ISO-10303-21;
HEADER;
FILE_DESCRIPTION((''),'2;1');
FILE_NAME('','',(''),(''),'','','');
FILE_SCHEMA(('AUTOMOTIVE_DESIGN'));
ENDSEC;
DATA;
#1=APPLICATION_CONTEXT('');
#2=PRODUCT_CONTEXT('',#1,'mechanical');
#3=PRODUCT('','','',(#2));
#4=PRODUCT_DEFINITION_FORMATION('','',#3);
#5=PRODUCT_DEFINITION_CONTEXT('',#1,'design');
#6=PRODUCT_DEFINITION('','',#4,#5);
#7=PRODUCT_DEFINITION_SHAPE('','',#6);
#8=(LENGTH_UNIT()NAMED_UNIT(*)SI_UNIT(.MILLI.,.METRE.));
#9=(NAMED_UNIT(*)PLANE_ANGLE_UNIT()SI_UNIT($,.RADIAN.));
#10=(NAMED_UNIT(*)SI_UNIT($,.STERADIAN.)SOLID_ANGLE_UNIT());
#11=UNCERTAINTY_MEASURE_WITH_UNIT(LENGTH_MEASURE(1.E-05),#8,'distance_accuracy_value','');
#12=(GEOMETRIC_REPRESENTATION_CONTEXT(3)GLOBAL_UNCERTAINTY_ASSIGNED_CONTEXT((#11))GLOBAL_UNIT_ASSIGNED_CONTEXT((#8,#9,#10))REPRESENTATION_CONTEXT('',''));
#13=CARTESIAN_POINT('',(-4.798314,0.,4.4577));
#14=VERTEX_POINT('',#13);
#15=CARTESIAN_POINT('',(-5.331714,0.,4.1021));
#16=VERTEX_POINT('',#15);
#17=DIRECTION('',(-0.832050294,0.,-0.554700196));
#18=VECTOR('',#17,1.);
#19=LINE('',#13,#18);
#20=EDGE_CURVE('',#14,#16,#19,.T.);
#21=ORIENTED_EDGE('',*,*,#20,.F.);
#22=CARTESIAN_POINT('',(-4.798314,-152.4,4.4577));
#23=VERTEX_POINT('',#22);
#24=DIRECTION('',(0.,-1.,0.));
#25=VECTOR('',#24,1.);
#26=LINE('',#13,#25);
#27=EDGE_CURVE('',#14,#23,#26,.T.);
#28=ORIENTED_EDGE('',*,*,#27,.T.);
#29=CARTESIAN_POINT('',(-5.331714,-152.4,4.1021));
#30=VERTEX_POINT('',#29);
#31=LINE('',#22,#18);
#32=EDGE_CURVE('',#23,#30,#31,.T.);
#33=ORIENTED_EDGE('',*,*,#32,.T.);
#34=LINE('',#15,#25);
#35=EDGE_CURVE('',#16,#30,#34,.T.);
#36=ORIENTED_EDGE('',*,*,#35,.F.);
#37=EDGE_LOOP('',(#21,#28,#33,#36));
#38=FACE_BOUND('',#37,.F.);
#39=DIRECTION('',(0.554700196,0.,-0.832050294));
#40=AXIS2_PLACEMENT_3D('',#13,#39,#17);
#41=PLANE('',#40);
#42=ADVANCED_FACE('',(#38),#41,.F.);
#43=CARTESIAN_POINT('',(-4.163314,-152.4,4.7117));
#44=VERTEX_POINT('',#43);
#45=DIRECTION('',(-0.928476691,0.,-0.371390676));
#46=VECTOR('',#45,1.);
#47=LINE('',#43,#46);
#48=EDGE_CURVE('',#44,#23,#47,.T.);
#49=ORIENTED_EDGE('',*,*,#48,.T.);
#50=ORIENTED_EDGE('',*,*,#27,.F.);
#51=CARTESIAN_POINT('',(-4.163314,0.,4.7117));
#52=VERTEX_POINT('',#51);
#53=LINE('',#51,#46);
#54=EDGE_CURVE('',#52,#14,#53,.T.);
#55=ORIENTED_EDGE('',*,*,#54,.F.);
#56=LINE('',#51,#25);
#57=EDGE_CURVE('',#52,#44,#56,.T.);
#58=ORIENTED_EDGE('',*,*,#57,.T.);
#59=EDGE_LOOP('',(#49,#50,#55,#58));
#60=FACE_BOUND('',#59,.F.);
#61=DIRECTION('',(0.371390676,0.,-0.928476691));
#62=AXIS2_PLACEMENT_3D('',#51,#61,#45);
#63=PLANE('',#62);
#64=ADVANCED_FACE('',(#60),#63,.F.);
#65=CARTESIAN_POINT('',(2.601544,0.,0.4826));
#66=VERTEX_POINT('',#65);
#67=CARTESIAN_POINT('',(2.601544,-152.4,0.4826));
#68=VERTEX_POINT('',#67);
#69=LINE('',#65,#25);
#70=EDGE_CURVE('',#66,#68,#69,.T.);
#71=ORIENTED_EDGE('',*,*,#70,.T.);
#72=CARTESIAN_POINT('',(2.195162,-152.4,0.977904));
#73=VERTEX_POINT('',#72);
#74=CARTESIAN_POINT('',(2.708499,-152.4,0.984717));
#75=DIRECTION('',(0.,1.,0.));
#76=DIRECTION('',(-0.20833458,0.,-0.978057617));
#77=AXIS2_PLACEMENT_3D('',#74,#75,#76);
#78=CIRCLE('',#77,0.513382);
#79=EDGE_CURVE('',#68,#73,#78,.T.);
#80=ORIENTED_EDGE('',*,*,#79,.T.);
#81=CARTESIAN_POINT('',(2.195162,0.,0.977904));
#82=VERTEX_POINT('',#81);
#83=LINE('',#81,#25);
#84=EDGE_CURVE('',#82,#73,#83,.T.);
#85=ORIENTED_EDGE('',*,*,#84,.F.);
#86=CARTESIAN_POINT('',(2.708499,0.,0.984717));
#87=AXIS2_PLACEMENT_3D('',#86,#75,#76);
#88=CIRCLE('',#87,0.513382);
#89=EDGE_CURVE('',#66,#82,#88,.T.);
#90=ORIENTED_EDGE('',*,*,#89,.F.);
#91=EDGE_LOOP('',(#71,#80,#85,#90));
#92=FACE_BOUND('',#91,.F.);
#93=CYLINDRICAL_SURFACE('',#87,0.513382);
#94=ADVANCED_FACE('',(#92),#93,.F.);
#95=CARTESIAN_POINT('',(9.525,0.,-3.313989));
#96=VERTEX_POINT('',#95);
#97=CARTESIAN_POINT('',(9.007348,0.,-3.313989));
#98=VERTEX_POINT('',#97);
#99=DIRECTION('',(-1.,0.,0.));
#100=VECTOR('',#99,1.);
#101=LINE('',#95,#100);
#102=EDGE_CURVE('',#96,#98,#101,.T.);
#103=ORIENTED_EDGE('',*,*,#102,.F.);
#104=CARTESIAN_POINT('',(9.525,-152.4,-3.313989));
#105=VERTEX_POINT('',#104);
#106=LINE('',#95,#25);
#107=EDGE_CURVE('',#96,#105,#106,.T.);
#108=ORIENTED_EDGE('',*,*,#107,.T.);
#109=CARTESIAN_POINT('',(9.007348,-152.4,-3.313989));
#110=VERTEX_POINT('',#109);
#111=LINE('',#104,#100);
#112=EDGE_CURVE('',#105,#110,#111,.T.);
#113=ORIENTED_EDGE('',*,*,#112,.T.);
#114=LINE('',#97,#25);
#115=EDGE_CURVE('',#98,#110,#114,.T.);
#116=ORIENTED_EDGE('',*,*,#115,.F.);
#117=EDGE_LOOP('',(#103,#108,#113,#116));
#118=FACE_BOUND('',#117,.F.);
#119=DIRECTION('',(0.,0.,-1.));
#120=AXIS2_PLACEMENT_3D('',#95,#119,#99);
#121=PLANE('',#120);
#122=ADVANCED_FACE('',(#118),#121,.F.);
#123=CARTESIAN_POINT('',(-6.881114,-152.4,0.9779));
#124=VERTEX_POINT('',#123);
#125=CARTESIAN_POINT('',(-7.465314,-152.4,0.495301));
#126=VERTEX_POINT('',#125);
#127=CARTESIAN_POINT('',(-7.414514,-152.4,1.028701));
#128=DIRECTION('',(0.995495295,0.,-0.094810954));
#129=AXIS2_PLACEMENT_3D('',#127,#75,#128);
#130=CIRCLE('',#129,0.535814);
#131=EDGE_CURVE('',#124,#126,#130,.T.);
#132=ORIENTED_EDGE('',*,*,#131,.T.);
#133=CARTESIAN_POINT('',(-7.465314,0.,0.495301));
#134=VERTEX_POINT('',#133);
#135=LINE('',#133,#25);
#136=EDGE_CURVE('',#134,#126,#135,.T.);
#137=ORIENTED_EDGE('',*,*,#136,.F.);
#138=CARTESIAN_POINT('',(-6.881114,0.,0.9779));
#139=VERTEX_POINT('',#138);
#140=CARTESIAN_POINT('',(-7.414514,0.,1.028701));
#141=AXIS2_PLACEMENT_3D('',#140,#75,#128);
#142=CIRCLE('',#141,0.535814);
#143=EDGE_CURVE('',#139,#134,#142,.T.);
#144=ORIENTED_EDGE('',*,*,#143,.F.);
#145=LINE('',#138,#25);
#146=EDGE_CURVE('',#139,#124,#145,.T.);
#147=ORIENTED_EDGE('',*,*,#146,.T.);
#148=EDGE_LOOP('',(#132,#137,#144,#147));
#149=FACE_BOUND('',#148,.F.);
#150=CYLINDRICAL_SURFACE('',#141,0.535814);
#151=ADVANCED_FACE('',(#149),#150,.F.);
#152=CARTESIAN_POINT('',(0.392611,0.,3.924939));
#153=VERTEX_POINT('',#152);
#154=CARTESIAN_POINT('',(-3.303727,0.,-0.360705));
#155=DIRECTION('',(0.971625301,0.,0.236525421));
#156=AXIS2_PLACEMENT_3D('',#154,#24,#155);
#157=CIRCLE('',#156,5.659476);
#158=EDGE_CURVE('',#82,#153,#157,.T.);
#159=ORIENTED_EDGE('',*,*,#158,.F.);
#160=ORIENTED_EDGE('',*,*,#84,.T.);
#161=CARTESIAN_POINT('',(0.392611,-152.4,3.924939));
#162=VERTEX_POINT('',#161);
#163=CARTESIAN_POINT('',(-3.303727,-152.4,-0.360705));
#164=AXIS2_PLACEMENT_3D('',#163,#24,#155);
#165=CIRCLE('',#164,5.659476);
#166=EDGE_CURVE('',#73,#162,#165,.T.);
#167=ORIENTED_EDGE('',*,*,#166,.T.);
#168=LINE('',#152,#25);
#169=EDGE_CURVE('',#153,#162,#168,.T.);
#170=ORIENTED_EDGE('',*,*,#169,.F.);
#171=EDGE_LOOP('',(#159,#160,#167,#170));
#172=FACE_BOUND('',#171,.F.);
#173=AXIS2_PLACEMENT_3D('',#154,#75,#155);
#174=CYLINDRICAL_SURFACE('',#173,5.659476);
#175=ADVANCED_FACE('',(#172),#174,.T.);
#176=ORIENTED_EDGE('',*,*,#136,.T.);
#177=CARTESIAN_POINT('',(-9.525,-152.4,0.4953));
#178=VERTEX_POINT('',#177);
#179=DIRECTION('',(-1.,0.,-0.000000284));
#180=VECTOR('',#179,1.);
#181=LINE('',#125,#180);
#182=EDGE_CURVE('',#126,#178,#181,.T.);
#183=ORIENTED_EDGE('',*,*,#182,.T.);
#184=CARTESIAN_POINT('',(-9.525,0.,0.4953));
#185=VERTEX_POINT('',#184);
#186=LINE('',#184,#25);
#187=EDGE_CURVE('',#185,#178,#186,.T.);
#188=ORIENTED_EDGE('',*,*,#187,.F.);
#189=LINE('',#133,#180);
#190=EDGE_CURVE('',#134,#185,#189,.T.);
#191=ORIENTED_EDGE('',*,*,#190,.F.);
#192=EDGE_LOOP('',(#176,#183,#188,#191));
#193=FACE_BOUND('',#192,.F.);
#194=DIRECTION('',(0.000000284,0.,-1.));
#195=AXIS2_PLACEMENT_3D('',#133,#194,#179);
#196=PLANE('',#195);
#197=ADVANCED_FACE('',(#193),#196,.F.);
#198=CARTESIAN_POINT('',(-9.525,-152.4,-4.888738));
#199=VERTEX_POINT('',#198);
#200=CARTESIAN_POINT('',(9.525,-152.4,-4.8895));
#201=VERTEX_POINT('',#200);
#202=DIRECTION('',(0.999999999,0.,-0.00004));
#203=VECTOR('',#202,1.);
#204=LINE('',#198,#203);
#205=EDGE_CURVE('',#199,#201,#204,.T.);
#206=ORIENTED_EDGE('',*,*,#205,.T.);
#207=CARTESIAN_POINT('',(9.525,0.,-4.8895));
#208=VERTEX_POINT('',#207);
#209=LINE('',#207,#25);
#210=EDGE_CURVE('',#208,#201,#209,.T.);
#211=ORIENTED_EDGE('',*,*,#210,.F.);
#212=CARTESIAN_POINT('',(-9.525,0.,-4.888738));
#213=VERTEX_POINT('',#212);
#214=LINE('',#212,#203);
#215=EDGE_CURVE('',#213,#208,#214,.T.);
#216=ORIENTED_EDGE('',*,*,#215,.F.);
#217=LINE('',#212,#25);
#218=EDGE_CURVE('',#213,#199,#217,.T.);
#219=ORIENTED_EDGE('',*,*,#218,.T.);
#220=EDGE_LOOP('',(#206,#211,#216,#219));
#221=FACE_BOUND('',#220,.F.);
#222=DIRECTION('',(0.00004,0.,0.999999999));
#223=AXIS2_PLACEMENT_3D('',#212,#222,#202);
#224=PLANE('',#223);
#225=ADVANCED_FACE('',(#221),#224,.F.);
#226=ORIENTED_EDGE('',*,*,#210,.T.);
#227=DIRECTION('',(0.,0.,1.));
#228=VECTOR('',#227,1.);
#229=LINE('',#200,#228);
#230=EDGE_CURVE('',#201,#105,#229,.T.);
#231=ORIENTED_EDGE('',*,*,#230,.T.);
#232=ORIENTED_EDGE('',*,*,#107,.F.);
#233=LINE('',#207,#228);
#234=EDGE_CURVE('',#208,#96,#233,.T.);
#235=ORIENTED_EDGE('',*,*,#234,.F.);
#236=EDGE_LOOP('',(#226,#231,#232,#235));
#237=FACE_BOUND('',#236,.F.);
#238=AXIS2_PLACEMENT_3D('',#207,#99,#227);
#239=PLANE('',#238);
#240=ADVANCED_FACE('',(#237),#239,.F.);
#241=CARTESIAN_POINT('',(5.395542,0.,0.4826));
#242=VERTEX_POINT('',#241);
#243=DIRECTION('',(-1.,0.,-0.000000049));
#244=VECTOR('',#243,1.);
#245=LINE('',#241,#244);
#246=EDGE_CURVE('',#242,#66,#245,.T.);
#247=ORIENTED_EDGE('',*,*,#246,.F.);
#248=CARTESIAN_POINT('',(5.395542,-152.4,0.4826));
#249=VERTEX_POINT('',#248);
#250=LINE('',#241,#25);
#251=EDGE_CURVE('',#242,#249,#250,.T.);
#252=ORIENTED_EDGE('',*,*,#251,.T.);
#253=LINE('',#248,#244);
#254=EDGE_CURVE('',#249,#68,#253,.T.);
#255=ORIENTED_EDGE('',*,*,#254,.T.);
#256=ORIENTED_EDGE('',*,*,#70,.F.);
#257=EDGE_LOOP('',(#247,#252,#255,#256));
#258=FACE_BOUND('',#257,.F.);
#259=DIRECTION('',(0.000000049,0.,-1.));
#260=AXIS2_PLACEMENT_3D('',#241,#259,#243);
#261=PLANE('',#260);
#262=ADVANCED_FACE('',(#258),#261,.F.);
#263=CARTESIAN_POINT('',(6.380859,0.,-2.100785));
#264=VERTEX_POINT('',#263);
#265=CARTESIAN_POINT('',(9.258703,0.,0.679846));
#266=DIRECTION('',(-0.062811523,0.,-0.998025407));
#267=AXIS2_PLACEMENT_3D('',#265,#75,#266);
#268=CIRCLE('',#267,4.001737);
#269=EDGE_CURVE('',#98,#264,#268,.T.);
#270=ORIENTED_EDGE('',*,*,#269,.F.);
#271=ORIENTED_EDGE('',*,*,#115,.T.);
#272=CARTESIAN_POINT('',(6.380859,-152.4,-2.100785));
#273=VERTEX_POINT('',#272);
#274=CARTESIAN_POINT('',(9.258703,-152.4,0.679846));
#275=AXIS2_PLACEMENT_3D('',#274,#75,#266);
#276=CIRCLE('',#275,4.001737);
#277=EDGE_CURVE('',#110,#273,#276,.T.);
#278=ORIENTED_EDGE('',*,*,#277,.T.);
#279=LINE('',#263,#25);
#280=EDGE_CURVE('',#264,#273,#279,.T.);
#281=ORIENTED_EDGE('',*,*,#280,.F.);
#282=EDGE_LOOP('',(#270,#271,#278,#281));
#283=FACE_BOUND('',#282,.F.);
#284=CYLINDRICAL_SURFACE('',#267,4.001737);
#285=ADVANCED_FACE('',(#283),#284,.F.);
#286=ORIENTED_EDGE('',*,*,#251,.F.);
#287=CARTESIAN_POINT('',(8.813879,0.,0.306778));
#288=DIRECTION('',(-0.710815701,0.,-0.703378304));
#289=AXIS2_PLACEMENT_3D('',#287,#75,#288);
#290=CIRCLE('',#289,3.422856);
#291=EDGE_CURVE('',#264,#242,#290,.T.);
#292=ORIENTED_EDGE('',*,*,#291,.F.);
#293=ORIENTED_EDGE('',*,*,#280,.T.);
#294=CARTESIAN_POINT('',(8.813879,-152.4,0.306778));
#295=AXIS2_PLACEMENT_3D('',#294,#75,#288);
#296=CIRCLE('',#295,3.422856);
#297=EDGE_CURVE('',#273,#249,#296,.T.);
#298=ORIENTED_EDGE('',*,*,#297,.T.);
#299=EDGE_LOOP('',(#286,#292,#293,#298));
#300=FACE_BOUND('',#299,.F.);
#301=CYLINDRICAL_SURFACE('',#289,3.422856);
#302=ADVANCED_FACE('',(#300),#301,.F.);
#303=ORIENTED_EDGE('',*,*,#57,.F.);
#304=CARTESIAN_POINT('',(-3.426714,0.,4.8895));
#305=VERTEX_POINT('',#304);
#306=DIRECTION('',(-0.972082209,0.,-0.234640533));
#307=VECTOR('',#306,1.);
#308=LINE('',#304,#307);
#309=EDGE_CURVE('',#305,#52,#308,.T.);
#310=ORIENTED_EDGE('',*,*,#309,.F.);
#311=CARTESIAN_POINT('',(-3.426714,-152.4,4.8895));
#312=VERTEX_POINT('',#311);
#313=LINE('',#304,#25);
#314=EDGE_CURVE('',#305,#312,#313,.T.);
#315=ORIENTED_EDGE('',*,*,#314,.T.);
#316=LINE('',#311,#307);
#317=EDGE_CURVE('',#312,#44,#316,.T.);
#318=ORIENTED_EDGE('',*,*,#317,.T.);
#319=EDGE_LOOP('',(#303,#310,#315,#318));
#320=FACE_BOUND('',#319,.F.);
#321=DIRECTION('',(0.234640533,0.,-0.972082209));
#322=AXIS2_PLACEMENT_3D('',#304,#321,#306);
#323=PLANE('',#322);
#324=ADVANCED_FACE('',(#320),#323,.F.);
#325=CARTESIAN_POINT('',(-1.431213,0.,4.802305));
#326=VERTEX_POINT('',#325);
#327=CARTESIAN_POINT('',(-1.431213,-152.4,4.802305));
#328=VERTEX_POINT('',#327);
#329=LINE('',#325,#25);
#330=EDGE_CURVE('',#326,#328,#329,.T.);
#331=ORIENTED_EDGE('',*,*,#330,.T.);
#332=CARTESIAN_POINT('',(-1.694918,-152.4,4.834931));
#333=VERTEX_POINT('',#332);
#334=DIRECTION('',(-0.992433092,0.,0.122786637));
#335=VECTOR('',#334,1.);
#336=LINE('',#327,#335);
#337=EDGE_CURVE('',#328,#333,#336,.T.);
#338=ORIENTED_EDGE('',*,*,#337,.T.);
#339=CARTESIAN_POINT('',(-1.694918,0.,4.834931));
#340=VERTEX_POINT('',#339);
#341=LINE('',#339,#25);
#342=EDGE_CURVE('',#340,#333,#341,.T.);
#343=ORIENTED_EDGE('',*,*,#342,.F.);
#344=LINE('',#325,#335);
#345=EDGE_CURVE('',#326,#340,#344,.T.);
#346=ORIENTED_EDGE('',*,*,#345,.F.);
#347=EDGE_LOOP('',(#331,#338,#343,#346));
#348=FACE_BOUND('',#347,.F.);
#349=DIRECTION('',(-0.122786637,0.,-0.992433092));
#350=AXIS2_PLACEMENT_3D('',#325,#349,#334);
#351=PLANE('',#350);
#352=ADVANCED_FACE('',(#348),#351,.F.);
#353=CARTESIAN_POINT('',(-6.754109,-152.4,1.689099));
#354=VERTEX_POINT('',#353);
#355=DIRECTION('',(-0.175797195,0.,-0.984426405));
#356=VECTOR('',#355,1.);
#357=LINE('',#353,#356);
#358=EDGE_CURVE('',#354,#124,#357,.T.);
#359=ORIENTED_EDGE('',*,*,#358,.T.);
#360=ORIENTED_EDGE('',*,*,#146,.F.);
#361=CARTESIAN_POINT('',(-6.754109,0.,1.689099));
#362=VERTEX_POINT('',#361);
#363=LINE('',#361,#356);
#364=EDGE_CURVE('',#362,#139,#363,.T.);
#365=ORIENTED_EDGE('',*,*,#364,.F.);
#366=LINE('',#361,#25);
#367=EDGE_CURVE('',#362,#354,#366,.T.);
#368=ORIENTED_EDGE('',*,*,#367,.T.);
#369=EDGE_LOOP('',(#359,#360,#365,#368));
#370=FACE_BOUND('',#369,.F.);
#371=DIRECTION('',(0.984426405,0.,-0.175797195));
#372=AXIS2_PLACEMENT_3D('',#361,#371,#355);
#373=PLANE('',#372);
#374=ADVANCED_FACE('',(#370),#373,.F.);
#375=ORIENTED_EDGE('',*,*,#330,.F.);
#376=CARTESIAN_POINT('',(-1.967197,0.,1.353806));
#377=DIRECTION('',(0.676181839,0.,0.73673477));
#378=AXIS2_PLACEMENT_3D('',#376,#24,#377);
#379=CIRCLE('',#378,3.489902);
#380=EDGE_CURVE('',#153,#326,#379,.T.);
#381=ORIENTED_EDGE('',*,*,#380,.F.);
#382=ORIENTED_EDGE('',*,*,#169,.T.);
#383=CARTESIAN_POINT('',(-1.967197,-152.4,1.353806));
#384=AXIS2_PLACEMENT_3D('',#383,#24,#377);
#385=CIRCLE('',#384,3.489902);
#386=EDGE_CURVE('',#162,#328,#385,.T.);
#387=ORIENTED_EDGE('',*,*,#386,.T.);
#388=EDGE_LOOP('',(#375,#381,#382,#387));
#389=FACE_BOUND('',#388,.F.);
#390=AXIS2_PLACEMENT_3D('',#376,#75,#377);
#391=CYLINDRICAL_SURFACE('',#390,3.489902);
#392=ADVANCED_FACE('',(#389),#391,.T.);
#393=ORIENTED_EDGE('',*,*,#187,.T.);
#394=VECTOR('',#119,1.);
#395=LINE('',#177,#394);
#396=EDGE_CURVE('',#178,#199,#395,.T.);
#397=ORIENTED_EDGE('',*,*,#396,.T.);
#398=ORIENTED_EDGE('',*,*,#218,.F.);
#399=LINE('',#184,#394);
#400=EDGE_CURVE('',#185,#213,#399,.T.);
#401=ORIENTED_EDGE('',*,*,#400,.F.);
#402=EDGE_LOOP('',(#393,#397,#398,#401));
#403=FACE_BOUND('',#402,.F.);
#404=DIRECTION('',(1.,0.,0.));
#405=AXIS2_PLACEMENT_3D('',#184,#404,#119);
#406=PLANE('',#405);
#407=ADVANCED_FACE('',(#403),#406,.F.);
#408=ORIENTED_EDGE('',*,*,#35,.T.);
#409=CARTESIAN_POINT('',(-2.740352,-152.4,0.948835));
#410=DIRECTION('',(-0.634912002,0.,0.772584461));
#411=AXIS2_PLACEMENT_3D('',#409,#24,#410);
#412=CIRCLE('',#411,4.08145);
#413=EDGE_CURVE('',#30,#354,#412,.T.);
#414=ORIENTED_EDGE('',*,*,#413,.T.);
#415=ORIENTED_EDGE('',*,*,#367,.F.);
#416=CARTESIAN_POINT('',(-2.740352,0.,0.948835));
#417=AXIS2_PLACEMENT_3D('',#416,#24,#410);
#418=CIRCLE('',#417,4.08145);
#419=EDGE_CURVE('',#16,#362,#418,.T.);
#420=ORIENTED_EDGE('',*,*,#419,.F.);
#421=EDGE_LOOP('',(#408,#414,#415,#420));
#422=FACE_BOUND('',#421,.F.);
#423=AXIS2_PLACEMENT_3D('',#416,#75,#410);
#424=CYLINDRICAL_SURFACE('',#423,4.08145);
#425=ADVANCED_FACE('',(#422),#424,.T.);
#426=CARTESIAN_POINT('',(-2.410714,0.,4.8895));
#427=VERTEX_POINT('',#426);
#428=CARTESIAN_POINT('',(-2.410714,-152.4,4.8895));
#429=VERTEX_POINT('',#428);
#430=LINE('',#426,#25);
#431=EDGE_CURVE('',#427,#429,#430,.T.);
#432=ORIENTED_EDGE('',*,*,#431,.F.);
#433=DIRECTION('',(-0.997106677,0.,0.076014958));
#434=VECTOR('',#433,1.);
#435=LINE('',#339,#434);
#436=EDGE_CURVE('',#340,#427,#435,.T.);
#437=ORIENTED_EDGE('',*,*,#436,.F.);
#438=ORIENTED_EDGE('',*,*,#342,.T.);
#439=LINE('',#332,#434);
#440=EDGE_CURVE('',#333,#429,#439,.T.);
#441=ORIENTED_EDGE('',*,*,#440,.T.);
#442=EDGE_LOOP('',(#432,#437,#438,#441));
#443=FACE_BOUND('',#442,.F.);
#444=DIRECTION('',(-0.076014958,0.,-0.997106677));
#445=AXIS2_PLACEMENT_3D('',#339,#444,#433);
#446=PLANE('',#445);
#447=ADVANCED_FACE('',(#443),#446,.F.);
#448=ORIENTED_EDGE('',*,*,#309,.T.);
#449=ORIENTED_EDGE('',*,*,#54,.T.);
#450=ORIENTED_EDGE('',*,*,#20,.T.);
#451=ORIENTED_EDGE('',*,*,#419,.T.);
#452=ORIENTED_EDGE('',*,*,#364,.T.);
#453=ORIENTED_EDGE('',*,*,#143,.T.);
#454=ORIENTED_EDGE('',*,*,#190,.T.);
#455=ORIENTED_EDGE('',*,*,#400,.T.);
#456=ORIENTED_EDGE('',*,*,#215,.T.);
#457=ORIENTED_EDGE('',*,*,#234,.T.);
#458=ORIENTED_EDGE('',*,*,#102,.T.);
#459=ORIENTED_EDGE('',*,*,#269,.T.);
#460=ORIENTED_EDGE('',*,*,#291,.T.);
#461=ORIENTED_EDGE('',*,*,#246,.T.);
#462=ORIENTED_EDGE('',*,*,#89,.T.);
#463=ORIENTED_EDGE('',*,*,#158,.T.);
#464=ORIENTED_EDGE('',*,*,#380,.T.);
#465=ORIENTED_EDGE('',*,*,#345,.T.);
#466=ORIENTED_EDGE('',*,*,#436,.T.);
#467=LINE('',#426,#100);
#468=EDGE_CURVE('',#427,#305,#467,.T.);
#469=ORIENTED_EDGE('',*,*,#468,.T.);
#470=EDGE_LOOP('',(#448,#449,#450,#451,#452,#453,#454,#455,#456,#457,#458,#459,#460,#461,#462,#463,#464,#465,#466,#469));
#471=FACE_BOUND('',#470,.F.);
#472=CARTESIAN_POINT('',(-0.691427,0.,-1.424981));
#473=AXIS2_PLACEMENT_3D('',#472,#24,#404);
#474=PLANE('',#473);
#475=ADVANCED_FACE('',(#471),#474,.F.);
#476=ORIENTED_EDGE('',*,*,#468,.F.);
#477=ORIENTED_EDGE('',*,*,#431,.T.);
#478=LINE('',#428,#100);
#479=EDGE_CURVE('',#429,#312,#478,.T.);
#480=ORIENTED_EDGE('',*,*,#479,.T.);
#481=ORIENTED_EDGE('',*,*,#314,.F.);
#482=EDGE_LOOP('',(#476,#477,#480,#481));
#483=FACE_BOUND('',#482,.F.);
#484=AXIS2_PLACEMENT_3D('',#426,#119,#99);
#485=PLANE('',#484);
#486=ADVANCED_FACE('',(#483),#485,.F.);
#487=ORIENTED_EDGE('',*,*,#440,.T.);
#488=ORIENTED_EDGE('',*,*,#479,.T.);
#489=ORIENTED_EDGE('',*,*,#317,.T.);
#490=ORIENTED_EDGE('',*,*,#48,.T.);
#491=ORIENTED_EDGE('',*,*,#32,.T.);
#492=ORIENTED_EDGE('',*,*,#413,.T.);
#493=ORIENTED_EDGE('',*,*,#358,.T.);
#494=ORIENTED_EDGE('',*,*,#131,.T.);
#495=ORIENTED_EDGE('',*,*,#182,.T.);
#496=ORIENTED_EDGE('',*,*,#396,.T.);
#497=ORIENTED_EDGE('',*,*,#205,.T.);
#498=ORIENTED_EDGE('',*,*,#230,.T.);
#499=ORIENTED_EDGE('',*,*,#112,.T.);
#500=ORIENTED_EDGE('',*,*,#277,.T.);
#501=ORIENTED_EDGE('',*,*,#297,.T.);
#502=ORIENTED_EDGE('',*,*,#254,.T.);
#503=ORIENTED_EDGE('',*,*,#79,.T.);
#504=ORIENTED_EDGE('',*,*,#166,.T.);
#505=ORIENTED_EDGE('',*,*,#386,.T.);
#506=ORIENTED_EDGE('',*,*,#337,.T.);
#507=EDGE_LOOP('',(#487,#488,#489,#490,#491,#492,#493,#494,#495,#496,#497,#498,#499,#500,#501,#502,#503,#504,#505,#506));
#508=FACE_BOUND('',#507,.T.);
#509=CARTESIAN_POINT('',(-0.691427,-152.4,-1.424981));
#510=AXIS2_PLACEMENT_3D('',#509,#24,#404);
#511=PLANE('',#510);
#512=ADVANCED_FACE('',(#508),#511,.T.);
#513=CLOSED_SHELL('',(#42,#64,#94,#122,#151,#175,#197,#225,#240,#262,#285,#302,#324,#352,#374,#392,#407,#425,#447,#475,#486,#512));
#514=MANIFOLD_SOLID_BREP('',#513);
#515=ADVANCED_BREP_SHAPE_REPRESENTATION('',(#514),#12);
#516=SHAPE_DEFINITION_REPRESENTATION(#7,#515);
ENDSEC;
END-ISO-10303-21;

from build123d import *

# Parameters (mm, degrees)
F1_DEPTH = 152.4


# Not quite as in the source:
# - ends of sketch curves that miss each other by under 0.0002 mm in the source are joined


with BuildPart() as f1:
    # F0 (on Front) → F1 (new body)
    with BuildSketch(Plane.XZ):
        with BuildLine():
            Line((-9.525, 0.4953), (-9.525, -4.888738))
            Line((-9.525, -4.888738), (9.525, -4.8895))
            Line((9.525, -4.8895), (9.525, -3.3139888))
            Line((9.525, -3.3139888), (9.007348, -3.3139888))
            ThreePointArc((9.007348, -3.3139888), (7.5806290696, -2.9530541155), (6.3808590282, -2.1007851053))
            ThreePointArc((6.3808590282, -2.1007851053), (5.615744399, -0.9130091212), (5.3955415237, 0.4826001377))
            Line((5.3955415237, 0.4826001377), (2.6015442, 0.4826))
            ThreePointArc((2.6015442, 0.4826), (2.3116101055, 0.6590793559), (2.195162482, 0.9779044504))
            ThreePointArc((2.195162482, 0.9779044504), (1.5242441759, 2.5923195678), (0.3926111465, 3.92493888))
            ThreePointArc((0.3926111465, 3.92493888), (-0.4543047996, 4.4987348188), (-1.4312133596, 4.8023046334))
            Line((-1.4312133596, 4.8023046334), (-1.6949178252, 4.8349308979))
            Line((-1.6949178252, 4.8349308979), (-2.410714, 4.8895))
            Line((-2.410714, 4.8895), (-3.426714, 4.8895))
            Line((-3.426714, 4.8895), (-4.163314, 4.7117))
            Line((-4.163314, 4.7117), (-4.798314, 4.4577))
            Line((-4.798314, 4.4577), (-5.331714, 4.1021))
            ThreePointArc((-5.331714, 4.1021), (-6.256392611, 3.0214411434), (-6.7541092682, 1.6890991273))
            Line((-6.7541092682, 1.6890991273), (-6.881114, 0.9779))
            ThreePointArc((-6.881114, 0.9779), (-7.0732646412, 0.615608671), (-7.4653139443, 0.4953005843))
            Line((-7.4653139443, 0.4953005843), (-9.525, 0.4953))
        make_face()
    extrude(amount=F1_DEPTH)


solid = f1.part
